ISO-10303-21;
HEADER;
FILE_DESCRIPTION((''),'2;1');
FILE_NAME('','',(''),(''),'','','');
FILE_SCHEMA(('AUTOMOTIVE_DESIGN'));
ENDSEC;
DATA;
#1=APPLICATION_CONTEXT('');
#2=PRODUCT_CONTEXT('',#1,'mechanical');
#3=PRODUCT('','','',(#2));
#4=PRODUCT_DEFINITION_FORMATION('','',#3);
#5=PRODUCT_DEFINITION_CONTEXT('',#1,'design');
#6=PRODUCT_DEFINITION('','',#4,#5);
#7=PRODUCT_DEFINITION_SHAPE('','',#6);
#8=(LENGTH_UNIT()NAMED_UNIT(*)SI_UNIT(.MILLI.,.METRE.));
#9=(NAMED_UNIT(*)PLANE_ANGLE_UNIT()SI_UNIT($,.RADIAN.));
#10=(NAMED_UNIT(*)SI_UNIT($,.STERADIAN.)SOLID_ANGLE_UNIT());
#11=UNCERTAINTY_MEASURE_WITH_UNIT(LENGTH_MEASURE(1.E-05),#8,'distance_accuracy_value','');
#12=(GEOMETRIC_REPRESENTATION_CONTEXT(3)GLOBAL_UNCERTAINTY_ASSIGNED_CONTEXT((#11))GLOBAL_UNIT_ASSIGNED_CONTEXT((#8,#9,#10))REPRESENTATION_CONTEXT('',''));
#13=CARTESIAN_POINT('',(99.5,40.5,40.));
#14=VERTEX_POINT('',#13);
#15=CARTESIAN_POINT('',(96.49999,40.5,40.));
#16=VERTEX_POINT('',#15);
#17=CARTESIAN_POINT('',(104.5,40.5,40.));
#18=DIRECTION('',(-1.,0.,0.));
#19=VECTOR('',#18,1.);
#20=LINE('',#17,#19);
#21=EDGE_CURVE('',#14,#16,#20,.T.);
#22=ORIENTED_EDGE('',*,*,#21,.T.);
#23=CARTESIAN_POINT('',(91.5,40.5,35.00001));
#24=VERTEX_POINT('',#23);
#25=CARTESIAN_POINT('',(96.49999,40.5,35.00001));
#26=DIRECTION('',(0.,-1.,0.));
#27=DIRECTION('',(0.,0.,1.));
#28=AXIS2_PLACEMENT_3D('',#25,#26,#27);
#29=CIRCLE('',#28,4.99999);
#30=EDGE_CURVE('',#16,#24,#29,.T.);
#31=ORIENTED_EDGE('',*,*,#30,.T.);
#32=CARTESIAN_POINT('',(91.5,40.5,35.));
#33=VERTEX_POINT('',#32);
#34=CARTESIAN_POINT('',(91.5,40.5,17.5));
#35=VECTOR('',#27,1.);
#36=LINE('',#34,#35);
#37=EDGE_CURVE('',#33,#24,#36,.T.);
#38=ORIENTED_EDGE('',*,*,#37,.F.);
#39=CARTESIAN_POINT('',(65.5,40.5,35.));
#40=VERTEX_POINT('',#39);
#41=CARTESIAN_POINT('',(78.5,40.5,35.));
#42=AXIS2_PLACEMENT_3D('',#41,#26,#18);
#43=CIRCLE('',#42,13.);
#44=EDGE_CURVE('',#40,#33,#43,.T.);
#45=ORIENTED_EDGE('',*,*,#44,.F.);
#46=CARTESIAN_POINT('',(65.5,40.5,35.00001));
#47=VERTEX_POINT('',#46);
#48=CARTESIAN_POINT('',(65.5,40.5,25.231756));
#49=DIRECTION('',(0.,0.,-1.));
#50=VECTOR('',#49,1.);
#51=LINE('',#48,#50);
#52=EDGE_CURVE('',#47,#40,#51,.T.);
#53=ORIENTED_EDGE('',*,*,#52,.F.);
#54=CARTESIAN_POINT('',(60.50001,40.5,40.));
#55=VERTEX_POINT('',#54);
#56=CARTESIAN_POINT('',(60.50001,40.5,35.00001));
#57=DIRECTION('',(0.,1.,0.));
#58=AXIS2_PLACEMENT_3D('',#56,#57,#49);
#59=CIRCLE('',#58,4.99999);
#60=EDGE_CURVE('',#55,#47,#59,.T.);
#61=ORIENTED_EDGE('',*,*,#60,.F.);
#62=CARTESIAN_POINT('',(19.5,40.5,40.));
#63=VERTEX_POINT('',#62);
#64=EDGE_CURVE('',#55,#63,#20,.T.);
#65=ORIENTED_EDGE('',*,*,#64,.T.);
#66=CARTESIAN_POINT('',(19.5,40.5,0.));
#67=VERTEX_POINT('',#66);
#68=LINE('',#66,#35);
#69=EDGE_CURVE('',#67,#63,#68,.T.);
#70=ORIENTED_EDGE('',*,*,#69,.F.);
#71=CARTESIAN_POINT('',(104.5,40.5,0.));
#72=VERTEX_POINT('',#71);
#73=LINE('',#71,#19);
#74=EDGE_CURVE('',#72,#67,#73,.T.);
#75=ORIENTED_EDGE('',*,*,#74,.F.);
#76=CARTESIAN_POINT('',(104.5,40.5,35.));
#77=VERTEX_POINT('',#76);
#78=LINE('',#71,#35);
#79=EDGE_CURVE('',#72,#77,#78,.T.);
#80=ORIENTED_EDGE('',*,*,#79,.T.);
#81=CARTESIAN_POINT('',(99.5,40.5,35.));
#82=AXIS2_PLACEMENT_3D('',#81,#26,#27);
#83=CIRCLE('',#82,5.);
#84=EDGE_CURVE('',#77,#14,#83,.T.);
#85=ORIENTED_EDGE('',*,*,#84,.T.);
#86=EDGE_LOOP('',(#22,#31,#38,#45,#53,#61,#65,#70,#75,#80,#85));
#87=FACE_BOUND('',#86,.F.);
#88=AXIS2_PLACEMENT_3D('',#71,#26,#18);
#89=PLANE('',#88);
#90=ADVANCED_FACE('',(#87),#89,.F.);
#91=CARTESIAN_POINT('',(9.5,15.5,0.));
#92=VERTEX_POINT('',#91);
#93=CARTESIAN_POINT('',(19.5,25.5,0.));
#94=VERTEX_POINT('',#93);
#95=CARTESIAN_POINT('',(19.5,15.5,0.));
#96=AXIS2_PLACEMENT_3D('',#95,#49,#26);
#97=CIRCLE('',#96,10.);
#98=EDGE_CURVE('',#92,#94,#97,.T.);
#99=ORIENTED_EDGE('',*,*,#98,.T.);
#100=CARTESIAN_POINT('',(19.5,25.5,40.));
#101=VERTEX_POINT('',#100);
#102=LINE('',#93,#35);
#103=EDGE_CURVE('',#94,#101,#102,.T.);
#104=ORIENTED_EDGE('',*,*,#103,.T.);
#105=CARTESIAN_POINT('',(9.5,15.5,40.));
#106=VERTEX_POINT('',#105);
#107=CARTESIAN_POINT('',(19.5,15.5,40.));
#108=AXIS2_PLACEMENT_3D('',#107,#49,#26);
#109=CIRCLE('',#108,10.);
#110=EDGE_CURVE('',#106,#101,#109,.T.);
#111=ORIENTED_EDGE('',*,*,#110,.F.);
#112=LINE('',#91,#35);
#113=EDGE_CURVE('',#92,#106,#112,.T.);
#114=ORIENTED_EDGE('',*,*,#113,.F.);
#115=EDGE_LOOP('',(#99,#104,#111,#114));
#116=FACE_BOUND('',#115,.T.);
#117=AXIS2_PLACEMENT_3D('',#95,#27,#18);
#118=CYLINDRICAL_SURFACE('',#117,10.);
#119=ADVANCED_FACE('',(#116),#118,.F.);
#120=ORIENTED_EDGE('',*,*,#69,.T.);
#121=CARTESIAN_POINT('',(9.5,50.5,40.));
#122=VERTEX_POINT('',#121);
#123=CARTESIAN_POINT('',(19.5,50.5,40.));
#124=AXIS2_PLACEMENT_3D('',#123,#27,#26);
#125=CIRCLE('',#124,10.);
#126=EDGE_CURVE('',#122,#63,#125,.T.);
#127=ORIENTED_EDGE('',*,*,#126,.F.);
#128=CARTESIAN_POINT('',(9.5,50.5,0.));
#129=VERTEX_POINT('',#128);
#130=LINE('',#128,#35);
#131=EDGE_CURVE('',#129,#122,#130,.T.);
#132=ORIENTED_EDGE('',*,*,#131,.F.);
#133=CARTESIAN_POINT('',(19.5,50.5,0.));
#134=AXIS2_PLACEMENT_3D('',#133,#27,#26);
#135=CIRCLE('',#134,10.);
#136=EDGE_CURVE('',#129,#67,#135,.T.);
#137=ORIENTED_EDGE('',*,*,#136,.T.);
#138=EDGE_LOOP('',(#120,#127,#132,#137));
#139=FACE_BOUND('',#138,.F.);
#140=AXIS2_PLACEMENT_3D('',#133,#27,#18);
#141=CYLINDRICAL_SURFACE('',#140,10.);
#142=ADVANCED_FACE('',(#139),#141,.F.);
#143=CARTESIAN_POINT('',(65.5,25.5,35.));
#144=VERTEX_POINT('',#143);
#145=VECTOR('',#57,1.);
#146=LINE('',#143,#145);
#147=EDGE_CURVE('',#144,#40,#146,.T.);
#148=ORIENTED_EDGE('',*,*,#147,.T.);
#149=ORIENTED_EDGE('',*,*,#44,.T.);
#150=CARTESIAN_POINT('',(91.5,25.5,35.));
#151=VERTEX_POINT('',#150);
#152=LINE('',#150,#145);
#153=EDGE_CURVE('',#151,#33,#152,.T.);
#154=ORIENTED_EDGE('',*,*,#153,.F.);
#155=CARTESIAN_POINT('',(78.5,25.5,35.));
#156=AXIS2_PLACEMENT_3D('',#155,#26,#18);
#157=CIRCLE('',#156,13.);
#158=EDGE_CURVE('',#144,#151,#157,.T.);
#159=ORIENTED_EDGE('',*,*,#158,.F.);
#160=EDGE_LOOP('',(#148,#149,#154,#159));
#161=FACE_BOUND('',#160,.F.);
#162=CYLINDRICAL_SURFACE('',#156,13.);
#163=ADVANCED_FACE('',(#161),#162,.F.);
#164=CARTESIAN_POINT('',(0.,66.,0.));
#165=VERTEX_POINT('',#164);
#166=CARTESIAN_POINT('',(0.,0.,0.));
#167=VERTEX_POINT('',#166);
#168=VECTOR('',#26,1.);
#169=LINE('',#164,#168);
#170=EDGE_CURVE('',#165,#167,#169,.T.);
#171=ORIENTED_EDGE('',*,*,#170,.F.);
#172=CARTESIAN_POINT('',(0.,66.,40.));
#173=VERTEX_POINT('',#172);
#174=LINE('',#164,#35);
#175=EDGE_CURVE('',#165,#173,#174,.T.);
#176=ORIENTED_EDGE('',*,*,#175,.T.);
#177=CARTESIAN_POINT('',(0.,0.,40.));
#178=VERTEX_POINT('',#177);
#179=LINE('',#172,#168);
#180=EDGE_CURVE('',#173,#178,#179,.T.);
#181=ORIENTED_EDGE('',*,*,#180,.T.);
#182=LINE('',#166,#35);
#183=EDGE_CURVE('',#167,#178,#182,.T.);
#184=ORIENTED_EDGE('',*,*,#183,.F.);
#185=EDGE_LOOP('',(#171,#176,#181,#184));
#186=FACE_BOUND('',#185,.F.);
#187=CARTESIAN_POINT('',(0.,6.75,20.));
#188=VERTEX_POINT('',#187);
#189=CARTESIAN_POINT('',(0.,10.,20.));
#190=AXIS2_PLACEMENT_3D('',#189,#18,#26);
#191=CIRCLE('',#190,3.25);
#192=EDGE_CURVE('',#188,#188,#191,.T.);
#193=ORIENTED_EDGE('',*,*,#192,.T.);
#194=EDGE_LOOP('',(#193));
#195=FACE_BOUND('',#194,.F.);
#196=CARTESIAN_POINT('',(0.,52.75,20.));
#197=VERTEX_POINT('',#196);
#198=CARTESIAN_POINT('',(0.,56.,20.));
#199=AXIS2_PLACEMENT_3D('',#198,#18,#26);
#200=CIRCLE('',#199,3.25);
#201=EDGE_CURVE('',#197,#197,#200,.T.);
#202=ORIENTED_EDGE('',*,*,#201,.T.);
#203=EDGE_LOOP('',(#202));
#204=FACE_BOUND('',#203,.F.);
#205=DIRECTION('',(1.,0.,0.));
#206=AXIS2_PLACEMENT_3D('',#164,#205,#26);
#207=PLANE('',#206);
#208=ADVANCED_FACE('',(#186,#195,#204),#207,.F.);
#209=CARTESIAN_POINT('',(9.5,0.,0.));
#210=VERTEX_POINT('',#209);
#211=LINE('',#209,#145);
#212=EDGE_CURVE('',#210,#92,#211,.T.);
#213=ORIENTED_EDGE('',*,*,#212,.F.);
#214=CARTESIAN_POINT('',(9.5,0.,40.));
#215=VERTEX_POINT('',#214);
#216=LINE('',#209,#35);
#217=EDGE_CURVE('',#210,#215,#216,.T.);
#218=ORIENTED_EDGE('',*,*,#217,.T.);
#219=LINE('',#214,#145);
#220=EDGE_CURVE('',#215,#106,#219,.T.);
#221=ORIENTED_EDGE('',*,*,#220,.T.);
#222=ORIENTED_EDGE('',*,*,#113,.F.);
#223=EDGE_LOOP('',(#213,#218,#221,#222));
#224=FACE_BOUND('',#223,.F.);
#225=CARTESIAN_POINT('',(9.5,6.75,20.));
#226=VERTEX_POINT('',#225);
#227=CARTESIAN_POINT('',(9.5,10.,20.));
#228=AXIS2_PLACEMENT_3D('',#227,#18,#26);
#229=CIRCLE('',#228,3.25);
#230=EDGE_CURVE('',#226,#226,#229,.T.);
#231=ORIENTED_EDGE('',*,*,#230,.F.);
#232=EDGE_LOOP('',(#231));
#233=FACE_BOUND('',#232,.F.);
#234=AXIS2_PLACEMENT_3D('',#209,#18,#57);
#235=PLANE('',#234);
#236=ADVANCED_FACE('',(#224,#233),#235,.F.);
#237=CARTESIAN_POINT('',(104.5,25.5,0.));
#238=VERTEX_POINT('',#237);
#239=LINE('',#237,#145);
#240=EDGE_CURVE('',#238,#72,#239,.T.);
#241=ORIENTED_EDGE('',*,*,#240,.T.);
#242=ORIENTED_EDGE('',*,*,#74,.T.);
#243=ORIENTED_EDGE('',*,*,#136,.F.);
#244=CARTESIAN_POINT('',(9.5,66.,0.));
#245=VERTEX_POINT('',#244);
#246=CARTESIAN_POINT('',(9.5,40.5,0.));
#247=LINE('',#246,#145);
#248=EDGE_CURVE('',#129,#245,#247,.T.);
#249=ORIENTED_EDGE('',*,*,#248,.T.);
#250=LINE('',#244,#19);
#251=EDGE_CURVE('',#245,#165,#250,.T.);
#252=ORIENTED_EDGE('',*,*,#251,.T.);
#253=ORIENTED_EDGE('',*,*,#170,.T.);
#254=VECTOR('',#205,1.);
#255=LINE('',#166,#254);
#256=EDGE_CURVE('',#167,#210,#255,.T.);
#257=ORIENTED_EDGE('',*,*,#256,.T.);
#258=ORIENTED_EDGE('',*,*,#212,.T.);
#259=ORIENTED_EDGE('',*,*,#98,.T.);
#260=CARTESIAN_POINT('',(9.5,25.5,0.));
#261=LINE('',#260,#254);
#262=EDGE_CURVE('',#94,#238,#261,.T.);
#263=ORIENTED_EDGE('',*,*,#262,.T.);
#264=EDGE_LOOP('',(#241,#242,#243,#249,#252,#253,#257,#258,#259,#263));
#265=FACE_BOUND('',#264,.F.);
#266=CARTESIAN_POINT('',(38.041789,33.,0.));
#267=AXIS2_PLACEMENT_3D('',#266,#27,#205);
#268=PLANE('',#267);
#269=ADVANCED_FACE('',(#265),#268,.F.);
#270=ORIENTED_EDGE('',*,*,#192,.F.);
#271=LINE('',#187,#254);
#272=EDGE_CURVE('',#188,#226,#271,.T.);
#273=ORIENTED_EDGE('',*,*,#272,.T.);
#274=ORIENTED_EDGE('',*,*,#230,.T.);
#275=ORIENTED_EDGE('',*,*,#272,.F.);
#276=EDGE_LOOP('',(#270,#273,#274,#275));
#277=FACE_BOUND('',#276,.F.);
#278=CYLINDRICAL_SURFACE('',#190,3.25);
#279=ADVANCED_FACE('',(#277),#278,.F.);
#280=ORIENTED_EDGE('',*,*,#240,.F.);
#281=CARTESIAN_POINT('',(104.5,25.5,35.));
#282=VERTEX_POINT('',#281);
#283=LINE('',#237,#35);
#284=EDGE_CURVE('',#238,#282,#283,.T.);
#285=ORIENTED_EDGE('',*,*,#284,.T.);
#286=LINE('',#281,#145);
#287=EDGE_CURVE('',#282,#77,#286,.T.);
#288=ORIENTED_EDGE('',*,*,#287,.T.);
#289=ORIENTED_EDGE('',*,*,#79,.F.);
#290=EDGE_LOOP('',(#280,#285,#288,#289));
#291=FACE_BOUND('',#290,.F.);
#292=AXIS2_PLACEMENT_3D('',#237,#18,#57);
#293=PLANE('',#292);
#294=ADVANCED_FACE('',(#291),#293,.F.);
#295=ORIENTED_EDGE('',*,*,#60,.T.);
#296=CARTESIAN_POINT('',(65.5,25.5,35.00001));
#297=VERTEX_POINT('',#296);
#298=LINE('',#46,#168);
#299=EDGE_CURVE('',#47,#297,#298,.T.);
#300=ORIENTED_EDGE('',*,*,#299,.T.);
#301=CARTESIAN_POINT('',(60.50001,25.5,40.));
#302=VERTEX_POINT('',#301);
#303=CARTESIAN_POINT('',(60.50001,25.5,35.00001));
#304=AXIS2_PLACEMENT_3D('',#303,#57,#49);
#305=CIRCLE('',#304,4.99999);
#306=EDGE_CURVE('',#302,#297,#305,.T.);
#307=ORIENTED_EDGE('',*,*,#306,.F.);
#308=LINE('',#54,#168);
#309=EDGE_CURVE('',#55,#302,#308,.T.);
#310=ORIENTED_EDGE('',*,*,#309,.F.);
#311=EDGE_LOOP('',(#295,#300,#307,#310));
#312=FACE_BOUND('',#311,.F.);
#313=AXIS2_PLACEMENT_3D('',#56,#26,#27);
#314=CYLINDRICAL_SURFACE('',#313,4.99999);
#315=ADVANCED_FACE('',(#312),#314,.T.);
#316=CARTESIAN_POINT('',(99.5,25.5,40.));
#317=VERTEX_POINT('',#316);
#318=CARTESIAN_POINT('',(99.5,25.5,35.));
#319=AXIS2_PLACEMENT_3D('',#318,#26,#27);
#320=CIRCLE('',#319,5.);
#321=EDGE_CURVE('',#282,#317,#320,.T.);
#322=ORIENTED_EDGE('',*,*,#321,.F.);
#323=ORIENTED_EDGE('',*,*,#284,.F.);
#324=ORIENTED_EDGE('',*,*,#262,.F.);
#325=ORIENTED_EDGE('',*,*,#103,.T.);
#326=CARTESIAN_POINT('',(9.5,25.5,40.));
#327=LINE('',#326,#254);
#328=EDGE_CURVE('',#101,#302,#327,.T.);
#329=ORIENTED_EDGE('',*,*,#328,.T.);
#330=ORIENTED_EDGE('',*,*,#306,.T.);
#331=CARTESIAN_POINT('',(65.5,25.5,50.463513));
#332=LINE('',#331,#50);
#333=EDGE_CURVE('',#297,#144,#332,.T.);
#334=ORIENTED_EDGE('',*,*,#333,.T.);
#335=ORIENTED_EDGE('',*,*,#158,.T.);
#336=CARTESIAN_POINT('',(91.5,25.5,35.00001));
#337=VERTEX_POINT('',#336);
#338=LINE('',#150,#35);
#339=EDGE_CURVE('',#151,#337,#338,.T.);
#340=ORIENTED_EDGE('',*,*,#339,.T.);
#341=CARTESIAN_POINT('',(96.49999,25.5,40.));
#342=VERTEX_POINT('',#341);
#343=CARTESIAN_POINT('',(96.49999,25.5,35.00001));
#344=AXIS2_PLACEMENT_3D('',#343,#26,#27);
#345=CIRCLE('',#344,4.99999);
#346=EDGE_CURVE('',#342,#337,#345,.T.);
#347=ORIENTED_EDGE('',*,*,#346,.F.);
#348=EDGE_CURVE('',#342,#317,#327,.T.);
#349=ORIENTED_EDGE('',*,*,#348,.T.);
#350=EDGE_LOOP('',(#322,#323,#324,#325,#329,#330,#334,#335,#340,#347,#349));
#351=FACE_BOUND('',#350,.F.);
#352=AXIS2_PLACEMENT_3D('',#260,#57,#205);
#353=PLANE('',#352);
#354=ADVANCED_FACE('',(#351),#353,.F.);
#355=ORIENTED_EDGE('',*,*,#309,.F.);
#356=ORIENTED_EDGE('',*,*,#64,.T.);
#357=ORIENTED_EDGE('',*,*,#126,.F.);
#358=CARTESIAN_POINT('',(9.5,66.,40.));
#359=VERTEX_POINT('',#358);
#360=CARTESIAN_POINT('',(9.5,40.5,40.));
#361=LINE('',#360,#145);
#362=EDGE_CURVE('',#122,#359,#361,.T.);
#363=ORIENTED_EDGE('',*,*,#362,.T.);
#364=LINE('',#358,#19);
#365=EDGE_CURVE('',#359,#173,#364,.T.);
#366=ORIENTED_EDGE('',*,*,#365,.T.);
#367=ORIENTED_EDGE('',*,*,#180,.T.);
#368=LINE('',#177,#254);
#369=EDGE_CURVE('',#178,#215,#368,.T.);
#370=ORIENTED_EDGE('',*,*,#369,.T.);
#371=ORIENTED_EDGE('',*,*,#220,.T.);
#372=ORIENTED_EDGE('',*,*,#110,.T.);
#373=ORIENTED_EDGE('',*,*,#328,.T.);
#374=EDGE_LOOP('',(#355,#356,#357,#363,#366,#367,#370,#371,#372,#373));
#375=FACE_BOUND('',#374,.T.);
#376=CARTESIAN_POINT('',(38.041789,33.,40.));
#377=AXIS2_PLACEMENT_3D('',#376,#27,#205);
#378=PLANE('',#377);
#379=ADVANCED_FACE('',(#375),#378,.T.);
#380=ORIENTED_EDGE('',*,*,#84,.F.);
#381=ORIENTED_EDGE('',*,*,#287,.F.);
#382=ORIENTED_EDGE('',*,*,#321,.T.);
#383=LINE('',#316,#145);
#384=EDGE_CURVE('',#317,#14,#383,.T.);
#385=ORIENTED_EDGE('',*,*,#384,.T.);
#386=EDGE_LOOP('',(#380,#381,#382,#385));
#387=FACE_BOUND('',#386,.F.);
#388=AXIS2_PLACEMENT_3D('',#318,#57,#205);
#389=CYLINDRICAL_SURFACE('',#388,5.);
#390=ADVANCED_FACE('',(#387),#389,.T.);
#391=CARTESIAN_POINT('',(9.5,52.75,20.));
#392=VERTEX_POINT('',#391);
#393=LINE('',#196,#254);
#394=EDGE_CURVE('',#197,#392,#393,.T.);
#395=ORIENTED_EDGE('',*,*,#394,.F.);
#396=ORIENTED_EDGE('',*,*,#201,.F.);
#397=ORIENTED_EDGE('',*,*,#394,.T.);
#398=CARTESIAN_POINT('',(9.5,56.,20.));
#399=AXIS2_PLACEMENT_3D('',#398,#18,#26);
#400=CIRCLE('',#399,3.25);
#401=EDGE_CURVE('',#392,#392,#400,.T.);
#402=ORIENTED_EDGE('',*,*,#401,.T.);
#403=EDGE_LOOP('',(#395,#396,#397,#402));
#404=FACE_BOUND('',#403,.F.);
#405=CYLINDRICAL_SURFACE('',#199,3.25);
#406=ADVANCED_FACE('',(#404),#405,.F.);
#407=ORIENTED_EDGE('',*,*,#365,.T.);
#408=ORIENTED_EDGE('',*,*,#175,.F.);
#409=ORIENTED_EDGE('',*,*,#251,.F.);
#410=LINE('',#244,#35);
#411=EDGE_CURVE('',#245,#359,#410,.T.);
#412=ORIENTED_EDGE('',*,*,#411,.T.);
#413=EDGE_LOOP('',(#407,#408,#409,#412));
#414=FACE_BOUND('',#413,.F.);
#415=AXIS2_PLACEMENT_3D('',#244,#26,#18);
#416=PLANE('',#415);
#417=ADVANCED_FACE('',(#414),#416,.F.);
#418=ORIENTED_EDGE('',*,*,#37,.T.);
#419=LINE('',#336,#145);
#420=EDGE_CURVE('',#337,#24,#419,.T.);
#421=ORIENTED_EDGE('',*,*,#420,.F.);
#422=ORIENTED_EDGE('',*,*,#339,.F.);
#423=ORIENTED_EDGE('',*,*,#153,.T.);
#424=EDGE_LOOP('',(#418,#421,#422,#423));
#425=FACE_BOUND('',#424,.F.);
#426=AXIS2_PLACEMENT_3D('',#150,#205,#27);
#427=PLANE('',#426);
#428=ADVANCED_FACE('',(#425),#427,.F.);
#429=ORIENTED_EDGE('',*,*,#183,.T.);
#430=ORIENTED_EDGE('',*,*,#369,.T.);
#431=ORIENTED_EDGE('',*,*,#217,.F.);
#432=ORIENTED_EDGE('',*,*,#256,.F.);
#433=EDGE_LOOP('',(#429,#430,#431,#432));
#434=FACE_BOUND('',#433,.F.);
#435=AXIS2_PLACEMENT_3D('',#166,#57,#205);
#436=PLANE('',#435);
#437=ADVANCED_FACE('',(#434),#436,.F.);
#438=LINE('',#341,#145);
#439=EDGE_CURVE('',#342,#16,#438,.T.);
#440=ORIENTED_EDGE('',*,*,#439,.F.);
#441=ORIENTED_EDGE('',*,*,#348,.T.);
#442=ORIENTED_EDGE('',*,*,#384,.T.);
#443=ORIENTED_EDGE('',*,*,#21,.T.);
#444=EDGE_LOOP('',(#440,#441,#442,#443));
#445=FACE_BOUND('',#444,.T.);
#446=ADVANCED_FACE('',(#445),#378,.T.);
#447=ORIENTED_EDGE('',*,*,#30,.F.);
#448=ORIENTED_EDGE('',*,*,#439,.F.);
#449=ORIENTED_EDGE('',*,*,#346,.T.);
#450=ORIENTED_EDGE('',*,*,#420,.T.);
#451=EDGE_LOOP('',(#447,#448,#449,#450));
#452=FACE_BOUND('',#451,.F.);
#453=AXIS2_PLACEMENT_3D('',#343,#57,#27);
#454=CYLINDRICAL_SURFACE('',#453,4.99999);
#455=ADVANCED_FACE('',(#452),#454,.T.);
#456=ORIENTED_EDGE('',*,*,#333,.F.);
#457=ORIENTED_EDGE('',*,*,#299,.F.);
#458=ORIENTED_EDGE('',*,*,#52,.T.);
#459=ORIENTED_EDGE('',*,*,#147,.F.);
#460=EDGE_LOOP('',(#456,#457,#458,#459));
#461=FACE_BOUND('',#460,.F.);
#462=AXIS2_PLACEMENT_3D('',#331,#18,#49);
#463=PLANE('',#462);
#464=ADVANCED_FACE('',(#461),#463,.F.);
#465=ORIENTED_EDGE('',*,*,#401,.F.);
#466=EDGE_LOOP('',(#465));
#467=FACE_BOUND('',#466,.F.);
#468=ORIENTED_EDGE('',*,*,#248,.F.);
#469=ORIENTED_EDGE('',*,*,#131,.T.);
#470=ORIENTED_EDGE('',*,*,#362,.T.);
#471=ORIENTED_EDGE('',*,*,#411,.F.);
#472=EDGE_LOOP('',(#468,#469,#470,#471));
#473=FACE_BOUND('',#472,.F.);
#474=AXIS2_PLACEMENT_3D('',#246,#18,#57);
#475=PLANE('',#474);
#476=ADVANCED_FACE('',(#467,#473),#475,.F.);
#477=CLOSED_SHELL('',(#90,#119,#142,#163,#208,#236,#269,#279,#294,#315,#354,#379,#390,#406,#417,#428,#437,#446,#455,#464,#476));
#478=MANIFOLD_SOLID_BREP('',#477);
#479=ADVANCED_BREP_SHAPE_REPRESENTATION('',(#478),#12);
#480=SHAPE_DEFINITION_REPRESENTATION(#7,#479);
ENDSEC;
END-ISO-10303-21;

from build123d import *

# Parameters (mm, degrees)
F1_DEPTH = 40
F2_R     = 3.25
F3_DEPTH = 104.501
F5_DEPTH = 40.501
F6_R     = 10
F7_R     = 4.99999
F8_R     = 5


# Not quite as in the source:
# - a fillet or chamfer is up to 0.001 mm smaller than in the source, because OpenCascade refuses the exact size


with BuildPart() as f1:
    # F0 (on Top) → F1 (new body)
    with BuildSketch(Plane.XY):
        Polygon((0, 66), (0, 0), (9.5, 0), (9.5, 25.5), (104.5, 25.5), (104.5, 40.5), (9.5, 40.5), (9.5, 66), align=None)
    extrude(amount=F1_DEPTH)

    # F2 (on face) → F3 (cut, through all)
    with BuildSketch(Plane(origin=(0, 0, 0), x_dir=(0, -1, 0), z_dir=(-1, 0, 0))):
        with Locations((-56, 20)):
            Circle(F2_R)
        with Locations((-10, 20)):
            Circle(F2_R)
    extrude(amount=-F3_DEPTH, mode=Mode.SUBTRACT)

    # F4 (on face) → F5 (cut, through all)
    with BuildSketch(Plane.XZ.offset(-25.5)):
        with BuildLine():
            Line((65.5, 35), (91.5, 35))
            ThreePointArc((91.5, 35), (78.5, 48), (65.5, 35))
        make_face()
        with BuildLine():
            ThreePointArc((65.5, 35), (78.5, 22), (91.5, 35))
            Line((91.5, 35), (65.5, 35))
        make_face()
        with BuildLine():
            ThreePointArc((65.5, 35), (78.5, 48), (91.5, 35))
            Line((91.5, 35), (91.5, 50.4635125536))
            Line((91.5, 50.4635125536), (65.5, 50.4635125536))
            Line((65.5, 50.4635125536), (65.5, 35))
        make_face()
    extrude(amount=-F5_DEPTH, mode=Mode.SUBTRACT)

    # F6
    f6_edges = [f1.edges().sort_by_distance(p)[0] for p in [
        (9.5, 25.5, 20),
        (9.5, 40.5, 20),
    ]]
    fillet(f6_edges, radius=F6_R)

    # F7 (radius 5 in the source; OpenCascade refuses exactly that, so slightly less here)
    f7_edges = [f1.edges().sort_by_distance(p)[0] for p in [
        (65.5, 33, 40),
        (91.5, 33, 40),
    ]]
    fillet(f7_edges, radius=F7_R)

    # F8
    f8_edges = [f1.edges().sort_by_distance(p)[0] for p in [
        (104.5, 33, 40),
    ]]
    fillet(f8_edges, radius=F8_R)


solid = f1.part
